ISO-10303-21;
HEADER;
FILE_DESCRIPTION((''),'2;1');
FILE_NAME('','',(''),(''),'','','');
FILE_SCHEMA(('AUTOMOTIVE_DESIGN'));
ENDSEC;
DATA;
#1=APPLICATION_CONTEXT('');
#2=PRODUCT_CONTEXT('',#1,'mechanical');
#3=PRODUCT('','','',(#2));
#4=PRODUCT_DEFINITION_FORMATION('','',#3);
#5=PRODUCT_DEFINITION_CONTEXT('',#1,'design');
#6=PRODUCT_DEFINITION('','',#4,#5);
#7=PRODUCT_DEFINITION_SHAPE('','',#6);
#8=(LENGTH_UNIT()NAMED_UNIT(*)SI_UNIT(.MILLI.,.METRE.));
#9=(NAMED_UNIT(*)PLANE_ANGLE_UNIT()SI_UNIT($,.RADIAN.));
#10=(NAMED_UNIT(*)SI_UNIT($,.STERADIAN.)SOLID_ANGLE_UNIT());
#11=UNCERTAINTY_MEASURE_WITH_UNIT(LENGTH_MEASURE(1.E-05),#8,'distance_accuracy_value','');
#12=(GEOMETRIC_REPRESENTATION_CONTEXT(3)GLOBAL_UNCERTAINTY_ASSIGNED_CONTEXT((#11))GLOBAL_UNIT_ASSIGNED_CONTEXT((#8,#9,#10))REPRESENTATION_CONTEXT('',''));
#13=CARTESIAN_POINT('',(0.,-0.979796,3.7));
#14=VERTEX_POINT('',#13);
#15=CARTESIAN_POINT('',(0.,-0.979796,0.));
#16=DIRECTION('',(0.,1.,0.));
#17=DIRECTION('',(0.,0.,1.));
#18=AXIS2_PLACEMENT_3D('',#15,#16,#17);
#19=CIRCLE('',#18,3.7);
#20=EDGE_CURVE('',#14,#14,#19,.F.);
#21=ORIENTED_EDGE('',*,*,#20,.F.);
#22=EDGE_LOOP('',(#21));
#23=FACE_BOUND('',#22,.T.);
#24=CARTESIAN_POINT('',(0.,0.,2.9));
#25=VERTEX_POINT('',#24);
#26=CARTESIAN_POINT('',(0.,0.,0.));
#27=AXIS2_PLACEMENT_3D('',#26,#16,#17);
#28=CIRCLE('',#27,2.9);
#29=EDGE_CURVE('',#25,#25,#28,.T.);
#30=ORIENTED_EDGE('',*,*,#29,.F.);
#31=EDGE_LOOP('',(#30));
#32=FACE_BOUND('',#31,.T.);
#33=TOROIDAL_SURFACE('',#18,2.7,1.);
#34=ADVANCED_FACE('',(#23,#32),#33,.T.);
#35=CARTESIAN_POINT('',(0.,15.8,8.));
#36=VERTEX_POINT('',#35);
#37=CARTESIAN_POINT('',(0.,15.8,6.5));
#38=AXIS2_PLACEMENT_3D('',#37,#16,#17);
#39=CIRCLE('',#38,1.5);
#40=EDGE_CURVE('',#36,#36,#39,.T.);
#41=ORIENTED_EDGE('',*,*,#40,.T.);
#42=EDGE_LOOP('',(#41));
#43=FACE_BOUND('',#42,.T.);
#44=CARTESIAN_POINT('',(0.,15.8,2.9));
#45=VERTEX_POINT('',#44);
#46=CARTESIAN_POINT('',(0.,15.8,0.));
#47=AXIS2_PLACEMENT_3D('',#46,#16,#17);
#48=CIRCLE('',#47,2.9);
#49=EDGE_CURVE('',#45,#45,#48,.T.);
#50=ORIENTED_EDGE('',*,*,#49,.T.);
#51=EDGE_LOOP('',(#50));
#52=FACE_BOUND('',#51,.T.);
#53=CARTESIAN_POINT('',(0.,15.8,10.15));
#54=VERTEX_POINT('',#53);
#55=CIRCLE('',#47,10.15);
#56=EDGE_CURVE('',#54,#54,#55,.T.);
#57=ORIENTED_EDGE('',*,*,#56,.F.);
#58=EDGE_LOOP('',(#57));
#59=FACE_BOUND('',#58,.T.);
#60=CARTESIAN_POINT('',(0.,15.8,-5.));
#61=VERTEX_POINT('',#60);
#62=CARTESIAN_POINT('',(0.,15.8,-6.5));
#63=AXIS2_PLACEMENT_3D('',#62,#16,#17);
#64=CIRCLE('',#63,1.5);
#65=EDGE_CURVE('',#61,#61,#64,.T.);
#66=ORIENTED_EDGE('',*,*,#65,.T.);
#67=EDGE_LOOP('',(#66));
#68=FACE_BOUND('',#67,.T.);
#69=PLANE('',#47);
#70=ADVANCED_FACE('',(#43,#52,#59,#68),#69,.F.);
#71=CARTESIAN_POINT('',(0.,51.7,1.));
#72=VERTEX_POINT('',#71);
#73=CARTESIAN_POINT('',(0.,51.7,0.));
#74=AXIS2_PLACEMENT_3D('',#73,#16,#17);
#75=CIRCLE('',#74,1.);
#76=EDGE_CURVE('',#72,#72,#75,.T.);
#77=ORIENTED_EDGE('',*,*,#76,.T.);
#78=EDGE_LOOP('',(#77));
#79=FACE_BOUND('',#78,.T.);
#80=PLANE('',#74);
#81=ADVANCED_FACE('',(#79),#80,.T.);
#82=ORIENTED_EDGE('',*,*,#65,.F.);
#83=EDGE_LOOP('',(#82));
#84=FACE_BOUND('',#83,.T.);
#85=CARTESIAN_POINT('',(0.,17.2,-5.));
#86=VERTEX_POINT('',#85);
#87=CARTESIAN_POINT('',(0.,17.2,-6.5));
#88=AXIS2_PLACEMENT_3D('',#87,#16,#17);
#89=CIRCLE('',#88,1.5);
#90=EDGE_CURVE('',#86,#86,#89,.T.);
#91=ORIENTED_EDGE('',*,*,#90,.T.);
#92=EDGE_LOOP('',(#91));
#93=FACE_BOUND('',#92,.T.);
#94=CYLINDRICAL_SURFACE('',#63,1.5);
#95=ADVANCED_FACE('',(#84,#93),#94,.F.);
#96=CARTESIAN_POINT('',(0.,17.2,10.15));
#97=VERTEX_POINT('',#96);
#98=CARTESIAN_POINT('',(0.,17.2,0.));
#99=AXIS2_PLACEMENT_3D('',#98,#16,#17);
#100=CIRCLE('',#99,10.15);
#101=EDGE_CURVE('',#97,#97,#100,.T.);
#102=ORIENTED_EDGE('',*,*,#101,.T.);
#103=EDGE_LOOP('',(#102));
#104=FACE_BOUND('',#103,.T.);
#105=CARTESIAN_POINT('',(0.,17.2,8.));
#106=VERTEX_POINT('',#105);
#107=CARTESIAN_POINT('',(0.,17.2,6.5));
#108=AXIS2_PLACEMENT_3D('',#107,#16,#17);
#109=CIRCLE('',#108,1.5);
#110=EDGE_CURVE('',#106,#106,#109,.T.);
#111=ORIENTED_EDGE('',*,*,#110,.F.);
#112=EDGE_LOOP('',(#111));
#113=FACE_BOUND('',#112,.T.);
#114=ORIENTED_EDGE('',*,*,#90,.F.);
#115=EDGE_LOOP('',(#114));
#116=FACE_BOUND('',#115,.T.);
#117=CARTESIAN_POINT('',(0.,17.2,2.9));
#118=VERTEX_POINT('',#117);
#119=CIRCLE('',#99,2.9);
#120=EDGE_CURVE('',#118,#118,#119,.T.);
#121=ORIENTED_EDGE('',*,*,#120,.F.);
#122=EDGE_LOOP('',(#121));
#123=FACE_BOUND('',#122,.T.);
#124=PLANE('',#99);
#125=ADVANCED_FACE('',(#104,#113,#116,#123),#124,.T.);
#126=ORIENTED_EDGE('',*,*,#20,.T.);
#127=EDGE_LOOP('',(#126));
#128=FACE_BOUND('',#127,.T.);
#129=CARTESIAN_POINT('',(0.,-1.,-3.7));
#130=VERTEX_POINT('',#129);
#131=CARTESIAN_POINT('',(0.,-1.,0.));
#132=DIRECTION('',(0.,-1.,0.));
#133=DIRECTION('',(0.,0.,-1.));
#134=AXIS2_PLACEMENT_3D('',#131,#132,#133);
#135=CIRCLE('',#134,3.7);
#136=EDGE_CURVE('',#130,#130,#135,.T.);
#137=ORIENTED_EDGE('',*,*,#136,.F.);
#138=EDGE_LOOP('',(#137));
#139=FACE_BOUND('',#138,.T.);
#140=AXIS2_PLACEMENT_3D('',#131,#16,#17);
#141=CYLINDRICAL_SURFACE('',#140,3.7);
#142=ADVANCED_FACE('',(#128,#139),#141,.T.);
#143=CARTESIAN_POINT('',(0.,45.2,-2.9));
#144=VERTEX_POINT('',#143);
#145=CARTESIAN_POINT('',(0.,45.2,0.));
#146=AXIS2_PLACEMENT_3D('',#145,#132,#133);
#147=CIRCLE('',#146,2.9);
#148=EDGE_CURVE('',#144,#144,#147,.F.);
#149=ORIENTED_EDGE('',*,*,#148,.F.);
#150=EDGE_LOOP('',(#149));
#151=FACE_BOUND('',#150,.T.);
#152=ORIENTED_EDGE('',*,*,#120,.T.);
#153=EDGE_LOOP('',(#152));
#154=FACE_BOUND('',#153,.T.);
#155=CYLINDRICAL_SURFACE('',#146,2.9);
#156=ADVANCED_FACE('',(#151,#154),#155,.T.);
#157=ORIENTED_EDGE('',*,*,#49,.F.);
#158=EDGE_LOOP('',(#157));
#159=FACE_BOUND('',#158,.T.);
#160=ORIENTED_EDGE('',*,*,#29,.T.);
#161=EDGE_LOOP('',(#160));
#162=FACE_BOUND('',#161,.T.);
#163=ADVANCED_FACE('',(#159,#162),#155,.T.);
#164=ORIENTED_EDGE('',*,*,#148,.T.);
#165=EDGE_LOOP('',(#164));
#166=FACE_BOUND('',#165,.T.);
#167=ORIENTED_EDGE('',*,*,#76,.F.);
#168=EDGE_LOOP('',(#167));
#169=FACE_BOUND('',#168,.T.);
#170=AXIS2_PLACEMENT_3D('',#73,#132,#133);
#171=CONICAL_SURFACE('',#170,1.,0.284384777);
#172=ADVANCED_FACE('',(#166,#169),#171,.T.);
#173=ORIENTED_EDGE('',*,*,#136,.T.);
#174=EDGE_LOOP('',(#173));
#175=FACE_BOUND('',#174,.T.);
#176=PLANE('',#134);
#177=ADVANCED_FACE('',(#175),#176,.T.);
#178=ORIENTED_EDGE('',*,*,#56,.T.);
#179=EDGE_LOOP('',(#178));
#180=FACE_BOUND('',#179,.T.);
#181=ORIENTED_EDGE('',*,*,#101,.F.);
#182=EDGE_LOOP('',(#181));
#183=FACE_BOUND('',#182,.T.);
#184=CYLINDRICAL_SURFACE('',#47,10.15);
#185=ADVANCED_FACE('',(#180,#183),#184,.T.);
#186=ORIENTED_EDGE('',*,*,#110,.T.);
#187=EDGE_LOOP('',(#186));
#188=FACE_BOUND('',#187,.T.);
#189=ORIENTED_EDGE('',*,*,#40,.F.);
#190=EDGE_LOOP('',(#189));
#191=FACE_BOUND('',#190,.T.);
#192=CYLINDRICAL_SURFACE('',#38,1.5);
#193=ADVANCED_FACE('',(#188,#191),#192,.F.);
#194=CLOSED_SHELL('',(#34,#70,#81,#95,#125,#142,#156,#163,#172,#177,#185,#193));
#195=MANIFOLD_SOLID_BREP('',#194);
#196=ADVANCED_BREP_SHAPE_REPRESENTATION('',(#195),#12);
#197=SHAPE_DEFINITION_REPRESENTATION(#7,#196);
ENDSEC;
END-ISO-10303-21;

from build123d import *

# Parameters (mm, degrees)
SKETCH1_R           = 2.9
BOSS_EXTRUDE1_DEPTH = 45.2
SKETCH2_R           = 3.7
BOSS_EXTRUDE2_DEPTH = 1
FILLET2_R           = 1
BOSS_EXTRUDE3_DEPTH = 1.4
SKETCH4_R           = 1
SKETCH5_R           = 2.9


with BuildPart() as part:
    # Sketch1 → Boss-Extrude1 (new body)
    with BuildSketch(Plane(origin=(0, 0, 0), x_dir=(1, 0, 0), z_dir=(0, 1, 0))):
        with Locations(Location((0, 0, 0), (0, 0, 270))):
            Circle(SKETCH1_R)
    extrude(amount=BOSS_EXTRUDE1_DEPTH)

    # Sketch2 → Boss-Extrude2 (add)
    with BuildSketch(Plane.XZ):
        with Locations(Location((0, 0, 0), (0, 0, 270))):
            Circle(SKETCH2_R)
    extrude(amount=BOSS_EXTRUDE2_DEPTH)

    # Fillet2
    # the kernel refuses this fillet: 1 mm, written as the material it takes off along each edge
    with BuildSketch(Plane(origin=(0, 0, 0), x_dir=(0, 0, -1), z_dir=(-1, 0, 0))) as fillet2_piece_1:
        with BuildLine():
            CenterArc((2.7, 0.979795897), FILLET2_R, 281.536959033, 78.463040967)
            Line((2.9, 0), (2.904, -0.019595918))
            ThreePointArc((2.904, -0.019595918), (3.3, -0.02), (3.7, -0.02))
            Line((3.7, -0.02), (3.72, 0))
            Line((3.72, 0), (3.72, 0.979795897))
            Line((3.72, 0.979795897), (3.7, 0.979795897))
        make_face()
    revolve(axis=Axis((0, 0, 0), (0, -1, 0)), mode=Mode.SUBTRACT)

    # Sketch3 → Boss-Extrude3 (add)
    with BuildSketch(Plane(origin=(0, 17.2, 0), x_dir=(1, 0, 0), z_dir=(0, 1, 0))):
        with BuildLine():
            ThreePointArc((0, 10.15), (-10.15, 0), (0, -10.15))
            Line((0, -10.15), (0, -8))
            ThreePointArc((0, -8), (-1.5, -6.5), (0, -5))
            Line((0, -5), (0, 5))
            ThreePointArc((0, 5), (-1.5, 6.5), (0, 8))
            Line((0, 8), (0, 10.15))
        make_face()
        with BuildLine():
            Line((0, -8), (0, -10.15))
            ThreePointArc((0, -10.15), (7.177133829, -7.177133829), (10.15, 0))
            ThreePointArc((10.15, 0), (7.177133829, 7.177133829), (0, 10.15))
            Line((0, 10.15), (0, 8))
            ThreePointArc((0, 8), (1.060660172, 7.560660172), (1.5, 6.5))
            ThreePointArc((1.5, 6.5), (1.060660172, 5.439339828), (0, 5))
            Line((0, 5), (0, -5))
            ThreePointArc((0, -5), (1.060660172, -5.439339828), (1.5, -6.5))
            ThreePointArc((1.5, -6.5), (1.060660172, -7.560660172), (0, -8))
        make_face()
    extrude(amount=-BOSS_EXTRUDE3_DEPTH)

    # Sketch4 → Loft1 section 0
    with BuildSketch(Plane(origin=(0, 51.7, 0), x_dir=(1, 0, 0), z_dir=(0, 1, 0))):
        Circle(SKETCH4_R)
    # Sketch5 → Loft1 section 1
    with BuildSketch(Plane(origin=(0, 45.2, 0), x_dir=(1, 0, 0), z_dir=(0, 1, 0))):
        Circle(SKETCH5_R)
    loft()


solid = part.part
